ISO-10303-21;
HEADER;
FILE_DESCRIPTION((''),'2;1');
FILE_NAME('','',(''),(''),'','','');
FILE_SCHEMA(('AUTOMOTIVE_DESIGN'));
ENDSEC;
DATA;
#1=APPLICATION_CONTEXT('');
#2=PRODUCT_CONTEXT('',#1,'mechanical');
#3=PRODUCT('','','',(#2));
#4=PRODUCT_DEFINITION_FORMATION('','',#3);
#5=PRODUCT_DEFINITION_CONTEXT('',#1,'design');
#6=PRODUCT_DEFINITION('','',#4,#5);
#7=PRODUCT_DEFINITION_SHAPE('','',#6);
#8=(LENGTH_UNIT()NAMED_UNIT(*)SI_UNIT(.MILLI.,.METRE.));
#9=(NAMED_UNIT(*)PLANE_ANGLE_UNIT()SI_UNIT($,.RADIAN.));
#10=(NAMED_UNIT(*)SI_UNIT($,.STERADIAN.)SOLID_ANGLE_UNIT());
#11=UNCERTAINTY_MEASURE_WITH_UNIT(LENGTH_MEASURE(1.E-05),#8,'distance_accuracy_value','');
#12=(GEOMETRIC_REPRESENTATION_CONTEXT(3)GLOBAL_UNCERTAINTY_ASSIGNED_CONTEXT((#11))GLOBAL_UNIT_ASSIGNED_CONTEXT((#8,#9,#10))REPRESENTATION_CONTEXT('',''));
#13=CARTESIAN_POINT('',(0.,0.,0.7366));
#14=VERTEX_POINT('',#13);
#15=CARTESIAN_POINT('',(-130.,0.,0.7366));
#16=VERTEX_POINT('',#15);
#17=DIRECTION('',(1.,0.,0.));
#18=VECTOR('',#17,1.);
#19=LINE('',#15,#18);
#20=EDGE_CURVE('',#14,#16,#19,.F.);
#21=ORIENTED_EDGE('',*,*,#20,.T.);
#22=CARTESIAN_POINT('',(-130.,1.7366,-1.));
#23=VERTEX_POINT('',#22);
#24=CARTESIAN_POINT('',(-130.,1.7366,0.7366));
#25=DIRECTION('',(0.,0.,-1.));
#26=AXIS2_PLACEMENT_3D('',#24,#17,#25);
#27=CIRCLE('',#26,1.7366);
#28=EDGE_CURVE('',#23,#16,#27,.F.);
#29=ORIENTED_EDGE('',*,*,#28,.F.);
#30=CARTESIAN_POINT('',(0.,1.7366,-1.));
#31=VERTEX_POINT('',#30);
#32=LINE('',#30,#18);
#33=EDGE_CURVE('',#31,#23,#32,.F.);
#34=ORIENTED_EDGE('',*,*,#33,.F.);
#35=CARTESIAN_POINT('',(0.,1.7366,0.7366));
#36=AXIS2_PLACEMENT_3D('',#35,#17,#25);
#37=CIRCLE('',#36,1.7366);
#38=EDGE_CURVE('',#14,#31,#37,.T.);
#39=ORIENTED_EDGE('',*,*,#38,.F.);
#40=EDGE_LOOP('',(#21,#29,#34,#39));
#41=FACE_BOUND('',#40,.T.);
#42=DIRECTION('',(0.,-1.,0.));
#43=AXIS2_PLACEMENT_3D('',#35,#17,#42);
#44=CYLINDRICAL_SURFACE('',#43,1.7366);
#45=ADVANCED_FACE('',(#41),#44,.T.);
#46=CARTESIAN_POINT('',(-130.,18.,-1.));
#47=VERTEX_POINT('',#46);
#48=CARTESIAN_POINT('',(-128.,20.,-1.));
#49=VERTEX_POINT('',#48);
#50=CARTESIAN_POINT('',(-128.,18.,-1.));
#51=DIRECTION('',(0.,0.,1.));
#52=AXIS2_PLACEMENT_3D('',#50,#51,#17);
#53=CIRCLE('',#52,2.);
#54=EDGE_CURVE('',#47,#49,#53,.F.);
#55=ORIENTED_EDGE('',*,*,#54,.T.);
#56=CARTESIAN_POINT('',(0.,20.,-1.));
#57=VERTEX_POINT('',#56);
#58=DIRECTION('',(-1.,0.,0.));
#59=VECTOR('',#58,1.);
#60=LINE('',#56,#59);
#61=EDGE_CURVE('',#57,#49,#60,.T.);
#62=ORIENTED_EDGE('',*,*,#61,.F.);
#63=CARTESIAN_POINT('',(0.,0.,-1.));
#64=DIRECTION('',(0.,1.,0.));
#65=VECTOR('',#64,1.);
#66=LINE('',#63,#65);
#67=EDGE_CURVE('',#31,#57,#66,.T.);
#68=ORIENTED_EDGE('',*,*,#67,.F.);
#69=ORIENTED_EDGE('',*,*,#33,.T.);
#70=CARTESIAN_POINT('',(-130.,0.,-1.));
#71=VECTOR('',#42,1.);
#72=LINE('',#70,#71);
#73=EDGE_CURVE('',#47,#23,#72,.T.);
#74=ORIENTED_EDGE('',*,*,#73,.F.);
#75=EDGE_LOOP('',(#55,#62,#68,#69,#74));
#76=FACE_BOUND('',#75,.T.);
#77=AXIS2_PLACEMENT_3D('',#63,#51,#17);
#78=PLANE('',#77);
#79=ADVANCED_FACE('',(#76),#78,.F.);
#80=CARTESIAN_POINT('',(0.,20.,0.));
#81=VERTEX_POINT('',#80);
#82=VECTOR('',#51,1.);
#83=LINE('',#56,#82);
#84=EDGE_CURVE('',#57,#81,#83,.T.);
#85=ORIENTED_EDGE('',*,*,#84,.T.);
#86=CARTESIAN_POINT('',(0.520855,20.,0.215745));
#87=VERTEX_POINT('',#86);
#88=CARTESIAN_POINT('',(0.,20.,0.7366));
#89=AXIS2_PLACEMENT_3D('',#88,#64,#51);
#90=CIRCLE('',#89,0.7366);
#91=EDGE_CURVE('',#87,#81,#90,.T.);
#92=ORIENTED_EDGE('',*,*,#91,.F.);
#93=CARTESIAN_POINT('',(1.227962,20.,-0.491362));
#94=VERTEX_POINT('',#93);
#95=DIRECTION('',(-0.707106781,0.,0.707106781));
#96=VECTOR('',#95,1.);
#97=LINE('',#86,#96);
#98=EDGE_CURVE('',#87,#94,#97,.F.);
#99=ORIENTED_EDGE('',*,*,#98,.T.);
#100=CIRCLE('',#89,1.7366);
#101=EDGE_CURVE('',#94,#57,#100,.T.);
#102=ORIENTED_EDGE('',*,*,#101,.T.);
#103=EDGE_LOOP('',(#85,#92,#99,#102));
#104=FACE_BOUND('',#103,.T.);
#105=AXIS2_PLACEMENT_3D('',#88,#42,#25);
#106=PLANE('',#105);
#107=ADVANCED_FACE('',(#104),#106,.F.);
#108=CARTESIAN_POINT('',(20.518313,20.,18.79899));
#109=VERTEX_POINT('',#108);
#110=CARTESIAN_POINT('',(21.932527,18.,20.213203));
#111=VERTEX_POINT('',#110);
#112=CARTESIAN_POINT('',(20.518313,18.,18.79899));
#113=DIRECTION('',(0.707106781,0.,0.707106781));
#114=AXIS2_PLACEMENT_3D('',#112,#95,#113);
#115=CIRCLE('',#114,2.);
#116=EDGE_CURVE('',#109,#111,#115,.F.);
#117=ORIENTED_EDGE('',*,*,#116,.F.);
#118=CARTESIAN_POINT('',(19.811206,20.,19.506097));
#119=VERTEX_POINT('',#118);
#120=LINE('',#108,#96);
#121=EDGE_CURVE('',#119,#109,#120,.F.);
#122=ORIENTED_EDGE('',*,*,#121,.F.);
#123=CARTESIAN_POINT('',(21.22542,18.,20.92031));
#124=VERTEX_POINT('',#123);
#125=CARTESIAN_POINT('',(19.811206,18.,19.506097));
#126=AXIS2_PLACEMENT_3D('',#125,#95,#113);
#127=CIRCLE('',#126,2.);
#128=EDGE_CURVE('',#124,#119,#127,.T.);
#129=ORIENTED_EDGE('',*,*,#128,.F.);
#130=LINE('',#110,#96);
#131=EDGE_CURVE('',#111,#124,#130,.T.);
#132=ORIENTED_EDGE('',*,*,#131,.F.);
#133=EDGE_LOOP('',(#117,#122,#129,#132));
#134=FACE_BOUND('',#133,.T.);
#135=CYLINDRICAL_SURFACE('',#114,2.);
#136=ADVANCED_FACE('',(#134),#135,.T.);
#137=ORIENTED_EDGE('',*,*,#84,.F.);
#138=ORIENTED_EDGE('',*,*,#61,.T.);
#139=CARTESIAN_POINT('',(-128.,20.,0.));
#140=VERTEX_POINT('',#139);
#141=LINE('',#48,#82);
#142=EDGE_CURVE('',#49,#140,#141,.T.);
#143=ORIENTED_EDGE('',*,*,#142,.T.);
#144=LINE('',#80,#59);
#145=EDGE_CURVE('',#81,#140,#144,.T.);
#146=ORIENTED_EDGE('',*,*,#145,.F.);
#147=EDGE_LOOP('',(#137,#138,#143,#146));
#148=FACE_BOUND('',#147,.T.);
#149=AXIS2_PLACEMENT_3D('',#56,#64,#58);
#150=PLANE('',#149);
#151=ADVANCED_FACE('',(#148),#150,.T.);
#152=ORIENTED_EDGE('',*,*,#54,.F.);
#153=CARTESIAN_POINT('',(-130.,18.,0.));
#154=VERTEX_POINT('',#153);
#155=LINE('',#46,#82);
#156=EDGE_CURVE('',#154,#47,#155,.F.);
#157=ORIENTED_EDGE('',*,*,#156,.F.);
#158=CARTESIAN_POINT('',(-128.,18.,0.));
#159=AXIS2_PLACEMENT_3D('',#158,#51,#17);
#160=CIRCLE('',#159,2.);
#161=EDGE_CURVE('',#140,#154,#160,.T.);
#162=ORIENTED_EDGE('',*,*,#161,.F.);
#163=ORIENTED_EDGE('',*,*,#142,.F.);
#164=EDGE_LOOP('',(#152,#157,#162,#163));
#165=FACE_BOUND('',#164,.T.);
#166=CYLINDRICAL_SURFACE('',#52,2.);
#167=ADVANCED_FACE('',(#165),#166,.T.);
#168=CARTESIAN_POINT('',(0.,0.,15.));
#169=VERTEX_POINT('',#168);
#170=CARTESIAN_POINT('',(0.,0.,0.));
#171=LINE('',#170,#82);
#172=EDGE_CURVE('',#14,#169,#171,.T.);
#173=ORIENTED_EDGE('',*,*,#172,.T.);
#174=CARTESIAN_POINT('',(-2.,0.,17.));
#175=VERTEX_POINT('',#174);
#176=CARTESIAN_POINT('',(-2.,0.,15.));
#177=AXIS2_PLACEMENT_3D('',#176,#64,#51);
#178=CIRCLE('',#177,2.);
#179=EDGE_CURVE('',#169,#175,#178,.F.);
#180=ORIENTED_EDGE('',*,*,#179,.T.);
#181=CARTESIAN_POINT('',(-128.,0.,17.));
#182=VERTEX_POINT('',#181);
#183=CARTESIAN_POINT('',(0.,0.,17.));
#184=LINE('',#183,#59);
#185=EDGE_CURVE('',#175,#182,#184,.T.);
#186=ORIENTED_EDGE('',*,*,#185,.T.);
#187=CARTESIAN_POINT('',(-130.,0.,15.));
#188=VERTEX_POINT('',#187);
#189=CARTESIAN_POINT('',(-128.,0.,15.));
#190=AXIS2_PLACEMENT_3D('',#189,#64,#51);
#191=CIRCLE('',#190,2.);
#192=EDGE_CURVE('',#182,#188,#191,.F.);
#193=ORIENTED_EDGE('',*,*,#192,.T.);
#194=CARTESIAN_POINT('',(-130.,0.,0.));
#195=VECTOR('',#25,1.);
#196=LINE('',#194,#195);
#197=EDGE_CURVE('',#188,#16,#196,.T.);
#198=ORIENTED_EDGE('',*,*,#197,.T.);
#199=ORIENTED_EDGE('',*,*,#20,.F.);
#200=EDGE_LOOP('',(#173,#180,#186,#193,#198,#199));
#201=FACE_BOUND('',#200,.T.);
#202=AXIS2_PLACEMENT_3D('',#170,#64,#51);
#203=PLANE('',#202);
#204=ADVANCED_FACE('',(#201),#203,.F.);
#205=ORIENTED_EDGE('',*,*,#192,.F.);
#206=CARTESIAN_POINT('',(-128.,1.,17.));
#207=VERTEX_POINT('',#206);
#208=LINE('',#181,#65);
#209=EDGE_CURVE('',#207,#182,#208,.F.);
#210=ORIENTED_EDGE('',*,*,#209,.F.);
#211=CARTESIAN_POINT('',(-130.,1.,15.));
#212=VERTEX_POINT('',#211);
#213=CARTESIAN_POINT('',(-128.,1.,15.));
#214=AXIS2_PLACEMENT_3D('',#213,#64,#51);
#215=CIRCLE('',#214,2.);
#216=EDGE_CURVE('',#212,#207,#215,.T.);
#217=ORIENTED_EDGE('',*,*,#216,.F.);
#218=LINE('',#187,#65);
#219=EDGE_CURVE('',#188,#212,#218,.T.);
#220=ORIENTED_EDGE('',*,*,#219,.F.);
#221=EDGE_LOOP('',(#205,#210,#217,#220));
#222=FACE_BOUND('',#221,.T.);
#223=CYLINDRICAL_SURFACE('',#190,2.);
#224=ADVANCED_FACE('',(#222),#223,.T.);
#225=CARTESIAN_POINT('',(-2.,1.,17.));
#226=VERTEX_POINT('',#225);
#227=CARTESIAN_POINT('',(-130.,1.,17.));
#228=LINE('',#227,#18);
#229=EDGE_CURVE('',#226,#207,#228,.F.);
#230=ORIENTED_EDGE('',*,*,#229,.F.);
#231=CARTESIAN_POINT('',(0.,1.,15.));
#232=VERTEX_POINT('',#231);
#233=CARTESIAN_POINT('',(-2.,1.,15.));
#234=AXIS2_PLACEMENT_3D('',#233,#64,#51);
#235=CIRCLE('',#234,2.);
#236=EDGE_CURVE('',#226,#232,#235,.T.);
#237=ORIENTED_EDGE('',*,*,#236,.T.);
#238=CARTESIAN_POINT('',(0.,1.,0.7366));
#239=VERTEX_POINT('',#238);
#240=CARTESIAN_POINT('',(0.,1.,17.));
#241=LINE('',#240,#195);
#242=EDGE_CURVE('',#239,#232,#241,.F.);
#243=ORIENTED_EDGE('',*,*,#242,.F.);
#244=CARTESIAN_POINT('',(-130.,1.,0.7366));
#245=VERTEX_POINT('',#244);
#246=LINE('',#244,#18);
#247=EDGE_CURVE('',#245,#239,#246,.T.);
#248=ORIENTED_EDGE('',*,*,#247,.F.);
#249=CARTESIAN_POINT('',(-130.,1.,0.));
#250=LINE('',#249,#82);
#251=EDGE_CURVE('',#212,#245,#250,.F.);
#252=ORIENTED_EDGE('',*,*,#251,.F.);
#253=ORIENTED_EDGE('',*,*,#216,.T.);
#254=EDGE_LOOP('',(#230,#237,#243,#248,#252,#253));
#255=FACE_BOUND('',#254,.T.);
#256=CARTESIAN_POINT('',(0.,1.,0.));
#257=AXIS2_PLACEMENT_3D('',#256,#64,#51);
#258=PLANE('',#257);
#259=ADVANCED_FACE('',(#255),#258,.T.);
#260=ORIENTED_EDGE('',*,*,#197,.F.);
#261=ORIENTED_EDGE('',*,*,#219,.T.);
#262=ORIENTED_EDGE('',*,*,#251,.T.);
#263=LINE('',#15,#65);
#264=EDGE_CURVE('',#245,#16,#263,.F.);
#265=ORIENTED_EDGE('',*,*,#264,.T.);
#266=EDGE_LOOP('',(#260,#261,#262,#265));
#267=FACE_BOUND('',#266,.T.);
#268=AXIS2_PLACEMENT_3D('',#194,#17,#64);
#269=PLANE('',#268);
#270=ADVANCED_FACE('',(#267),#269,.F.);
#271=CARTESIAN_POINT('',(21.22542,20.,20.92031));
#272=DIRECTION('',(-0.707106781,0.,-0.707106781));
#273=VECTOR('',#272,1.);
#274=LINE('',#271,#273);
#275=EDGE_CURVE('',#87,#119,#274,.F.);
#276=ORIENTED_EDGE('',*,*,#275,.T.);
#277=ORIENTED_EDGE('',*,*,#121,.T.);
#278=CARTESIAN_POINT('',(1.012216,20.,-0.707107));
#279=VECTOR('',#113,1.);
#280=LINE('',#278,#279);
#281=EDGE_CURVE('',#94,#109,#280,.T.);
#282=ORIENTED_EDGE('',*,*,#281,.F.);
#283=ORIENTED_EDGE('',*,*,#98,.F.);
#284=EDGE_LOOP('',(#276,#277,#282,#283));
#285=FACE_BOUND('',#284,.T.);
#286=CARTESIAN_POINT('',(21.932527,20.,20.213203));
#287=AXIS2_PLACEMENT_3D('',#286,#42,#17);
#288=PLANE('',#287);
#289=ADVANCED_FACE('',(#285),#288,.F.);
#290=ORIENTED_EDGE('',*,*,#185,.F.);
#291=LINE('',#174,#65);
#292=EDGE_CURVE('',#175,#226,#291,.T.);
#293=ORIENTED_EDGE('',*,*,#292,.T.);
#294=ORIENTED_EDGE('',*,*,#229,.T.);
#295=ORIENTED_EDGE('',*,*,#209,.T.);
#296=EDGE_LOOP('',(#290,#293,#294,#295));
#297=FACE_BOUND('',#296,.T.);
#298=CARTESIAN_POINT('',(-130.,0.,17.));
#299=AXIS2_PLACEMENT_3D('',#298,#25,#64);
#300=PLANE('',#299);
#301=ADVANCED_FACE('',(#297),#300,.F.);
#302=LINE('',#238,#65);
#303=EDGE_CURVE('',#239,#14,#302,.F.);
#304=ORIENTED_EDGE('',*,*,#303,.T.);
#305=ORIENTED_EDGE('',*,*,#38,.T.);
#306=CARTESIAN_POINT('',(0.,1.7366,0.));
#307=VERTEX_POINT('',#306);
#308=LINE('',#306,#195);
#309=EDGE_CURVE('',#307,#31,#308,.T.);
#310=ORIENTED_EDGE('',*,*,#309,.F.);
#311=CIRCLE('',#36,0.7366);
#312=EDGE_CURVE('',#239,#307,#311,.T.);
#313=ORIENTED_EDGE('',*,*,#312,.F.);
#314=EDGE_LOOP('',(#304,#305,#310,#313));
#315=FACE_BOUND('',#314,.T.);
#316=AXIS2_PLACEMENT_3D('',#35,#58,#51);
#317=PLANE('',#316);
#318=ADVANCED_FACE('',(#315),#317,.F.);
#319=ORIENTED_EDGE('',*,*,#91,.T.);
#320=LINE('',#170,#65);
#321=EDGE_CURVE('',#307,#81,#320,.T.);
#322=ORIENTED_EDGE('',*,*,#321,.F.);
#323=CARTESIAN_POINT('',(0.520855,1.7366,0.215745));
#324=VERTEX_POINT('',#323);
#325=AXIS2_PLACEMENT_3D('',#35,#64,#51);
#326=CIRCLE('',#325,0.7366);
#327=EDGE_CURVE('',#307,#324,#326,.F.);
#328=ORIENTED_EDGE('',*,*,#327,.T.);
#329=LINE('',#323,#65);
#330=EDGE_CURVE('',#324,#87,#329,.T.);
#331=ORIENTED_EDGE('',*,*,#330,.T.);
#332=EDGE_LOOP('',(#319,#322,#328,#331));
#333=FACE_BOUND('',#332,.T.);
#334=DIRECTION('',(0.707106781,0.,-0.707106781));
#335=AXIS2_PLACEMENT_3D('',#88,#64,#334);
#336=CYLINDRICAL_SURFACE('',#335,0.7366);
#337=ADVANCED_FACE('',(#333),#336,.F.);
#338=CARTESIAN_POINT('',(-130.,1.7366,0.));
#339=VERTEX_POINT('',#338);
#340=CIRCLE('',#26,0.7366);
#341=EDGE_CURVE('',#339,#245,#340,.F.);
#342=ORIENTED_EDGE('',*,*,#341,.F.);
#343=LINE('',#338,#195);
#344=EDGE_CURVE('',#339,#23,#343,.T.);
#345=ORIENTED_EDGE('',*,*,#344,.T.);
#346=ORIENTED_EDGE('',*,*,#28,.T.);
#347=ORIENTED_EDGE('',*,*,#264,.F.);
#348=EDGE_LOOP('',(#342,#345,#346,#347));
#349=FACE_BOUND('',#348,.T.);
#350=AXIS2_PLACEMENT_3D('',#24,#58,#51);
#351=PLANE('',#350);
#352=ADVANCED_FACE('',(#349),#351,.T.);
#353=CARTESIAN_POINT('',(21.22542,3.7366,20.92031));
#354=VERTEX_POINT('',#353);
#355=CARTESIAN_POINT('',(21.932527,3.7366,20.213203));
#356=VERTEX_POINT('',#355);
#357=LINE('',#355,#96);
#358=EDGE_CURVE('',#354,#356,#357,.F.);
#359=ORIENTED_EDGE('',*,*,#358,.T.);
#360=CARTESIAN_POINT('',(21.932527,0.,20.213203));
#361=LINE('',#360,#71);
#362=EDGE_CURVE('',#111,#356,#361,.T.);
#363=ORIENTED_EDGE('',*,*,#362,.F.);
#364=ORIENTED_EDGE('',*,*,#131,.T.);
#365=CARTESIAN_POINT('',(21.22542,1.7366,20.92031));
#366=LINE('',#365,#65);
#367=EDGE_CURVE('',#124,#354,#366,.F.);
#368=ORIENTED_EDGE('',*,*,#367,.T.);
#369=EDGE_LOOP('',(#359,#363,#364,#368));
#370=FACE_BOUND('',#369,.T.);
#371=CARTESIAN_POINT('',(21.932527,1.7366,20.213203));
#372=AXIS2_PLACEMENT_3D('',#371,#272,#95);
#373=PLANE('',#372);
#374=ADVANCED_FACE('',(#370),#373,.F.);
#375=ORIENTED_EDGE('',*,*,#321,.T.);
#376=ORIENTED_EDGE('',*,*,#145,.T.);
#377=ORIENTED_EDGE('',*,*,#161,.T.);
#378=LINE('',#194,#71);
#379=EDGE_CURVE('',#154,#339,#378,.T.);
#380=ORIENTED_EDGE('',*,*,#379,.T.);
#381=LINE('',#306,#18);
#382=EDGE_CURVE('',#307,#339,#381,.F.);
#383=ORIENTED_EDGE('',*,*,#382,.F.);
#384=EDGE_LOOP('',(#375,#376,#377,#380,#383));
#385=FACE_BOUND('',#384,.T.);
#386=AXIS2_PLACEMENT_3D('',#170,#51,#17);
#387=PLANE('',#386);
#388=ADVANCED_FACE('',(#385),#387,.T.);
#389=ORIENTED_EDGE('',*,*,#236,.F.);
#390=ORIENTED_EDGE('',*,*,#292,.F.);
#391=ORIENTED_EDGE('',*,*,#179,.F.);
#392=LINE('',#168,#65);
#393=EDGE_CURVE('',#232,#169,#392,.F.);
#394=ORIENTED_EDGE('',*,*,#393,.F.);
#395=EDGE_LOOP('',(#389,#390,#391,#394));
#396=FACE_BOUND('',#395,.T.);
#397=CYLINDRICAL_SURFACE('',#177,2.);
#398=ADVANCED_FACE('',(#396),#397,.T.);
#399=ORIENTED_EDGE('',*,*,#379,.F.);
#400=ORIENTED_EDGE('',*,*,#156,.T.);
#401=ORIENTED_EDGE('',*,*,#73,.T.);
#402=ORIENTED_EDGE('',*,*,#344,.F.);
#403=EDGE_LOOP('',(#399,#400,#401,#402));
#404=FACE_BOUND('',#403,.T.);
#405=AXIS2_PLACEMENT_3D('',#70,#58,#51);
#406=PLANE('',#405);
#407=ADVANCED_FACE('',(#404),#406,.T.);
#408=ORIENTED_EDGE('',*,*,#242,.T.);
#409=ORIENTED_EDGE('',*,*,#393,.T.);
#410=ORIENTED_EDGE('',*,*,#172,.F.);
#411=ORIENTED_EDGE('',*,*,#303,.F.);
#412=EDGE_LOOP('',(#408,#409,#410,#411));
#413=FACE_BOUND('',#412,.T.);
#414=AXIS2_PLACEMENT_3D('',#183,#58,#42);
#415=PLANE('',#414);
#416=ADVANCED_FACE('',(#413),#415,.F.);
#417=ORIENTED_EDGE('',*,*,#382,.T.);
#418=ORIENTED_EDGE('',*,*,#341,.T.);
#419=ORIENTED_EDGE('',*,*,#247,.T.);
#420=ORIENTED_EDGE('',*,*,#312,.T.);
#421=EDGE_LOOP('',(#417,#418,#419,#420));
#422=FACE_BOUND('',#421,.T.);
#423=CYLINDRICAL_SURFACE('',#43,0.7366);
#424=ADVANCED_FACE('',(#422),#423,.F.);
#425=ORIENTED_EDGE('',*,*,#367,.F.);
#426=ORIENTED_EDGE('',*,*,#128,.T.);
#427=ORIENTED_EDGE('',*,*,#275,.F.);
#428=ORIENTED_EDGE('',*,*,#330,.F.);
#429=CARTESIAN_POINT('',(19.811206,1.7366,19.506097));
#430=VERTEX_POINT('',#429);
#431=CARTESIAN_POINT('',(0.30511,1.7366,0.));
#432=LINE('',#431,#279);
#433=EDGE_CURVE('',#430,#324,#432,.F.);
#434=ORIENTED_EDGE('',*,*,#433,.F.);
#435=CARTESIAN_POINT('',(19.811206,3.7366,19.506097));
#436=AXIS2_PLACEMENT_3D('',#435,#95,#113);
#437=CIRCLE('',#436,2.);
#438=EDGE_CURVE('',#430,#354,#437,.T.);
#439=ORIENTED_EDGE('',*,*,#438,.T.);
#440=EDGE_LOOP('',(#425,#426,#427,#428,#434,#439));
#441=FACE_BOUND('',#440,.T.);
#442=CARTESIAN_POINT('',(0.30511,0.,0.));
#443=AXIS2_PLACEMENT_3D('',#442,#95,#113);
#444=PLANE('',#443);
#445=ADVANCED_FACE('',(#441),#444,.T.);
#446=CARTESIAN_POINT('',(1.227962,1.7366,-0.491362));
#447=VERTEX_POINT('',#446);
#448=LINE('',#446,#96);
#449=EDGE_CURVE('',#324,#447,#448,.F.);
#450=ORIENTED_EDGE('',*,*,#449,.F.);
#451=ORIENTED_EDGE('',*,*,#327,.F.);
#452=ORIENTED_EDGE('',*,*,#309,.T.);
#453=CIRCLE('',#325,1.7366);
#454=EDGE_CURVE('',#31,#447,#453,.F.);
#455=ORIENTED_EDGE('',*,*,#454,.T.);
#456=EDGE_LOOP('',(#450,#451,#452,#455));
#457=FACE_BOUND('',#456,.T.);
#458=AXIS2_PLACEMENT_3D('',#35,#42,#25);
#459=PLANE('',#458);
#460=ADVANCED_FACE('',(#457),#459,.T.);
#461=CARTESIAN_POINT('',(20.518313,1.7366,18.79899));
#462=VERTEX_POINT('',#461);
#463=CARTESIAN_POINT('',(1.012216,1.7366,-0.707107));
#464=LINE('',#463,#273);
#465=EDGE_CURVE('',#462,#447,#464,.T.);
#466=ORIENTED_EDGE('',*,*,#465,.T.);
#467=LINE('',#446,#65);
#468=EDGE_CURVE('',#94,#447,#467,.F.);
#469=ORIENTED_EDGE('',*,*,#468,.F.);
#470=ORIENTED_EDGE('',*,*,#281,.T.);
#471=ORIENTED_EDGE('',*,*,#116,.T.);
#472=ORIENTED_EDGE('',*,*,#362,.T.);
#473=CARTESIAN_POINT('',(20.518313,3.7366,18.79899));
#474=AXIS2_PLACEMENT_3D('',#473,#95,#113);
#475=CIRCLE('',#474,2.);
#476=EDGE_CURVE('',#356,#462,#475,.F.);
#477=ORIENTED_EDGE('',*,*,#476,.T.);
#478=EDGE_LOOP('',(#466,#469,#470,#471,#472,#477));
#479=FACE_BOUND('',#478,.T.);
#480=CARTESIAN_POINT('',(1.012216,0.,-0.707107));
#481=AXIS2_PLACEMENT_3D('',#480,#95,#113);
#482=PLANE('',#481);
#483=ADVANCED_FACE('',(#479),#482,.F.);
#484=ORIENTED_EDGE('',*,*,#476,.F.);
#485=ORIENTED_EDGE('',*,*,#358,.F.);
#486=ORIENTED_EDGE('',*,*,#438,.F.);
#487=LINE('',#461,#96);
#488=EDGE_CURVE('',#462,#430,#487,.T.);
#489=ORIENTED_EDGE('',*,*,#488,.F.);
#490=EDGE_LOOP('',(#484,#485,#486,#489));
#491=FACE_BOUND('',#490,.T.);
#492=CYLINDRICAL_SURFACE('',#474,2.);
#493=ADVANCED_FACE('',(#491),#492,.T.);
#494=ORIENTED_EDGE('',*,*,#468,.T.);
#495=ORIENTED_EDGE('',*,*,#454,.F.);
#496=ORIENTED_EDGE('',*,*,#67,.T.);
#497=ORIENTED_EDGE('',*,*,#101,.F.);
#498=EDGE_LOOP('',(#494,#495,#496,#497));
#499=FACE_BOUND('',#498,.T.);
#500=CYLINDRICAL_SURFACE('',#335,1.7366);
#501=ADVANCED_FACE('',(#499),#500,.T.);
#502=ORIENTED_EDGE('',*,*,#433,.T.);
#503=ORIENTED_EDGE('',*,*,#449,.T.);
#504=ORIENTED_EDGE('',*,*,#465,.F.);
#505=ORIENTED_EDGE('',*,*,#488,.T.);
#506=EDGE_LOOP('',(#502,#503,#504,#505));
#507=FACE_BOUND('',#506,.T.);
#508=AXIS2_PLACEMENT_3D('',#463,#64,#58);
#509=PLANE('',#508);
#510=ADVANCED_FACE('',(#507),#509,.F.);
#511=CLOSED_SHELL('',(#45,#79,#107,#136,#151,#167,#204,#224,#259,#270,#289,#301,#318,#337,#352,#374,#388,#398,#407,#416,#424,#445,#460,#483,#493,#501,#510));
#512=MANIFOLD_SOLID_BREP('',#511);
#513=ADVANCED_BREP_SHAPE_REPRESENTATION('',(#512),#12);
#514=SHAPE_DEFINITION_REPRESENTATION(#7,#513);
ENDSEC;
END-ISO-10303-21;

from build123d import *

# Parameters (mm, degrees)
SKETCH2_W                    = 130
SKETCH2_H                    = 20
BASE_FLANGE1_DEPTH           = 1
EDGE_FLANGE1_STRIP_W         = 5.4732
EDGE_FLANGE1_STRIP_H         = 1
EDGE_FLANGE1_STRIP_CUT_DEPTH = 130
EDGE_FLANGE1_DEPTH           = 130
EDGE_FLANGE2_DEPTH           = 18.2634
FILLET1_R                    = 2


# Sheet-metal steps are written as plain solids
with BuildPart() as part:
    # Sketch2 → Base-Flange1 (new body)
    with BuildSketch(Plane.XY):
        with Locations((-65, 10)):
            Rectangle(SKETCH2_W, SKETCH2_H)
    extrude(amount=-BASE_FLANGE1_DEPTH)

    # Edge-Flange1 strip (across the edge) → Edge-Flange1 strip cut (cut)
    with BuildSketch(Plane.YZ.offset(-130)):
        with Locations((-1, -0.5)):
            Rectangle(EDGE_FLANGE1_STRIP_W, EDGE_FLANGE1_STRIP_H)
    extrude(amount=EDGE_FLANGE1_STRIP_CUT_DEPTH, mode=Mode.SUBTRACT)

    # Edge-Flange1 section (across the edge) → Edge-Flange1 (add)
    with BuildSketch(Plane.YZ.offset(-130)):
        with BuildLine():
            Line((0, 0.7366), (0, 17))
            Line((0, 17), (1, 17))
            Line((1, 17), (1, 0.7366))
            ThreePointArc((1, 0.7366), (1.215745145, 0.215745145), (1.7366, 0))
            Line((1.7366, 0), (1.7366, -1))
            ThreePointArc((1.7366, -1), (0.508638364, -0.491361636), (0, 0.7366))
        make_face()
    extrude(amount=EDGE_FLANGE1_DEPTH)

    # Edge-Flange2 section (across the edge) → Edge-Flange2 (add)
    with BuildSketch(Plane(origin=(0.30510971, 1.7366, 0), x_dir=(-0.7071067811865438, 0, 0.7071067811865512), z_dir=(0, 1, 0))):
        with BuildLine():
            Line((-1, 0.30510971), (-1, 29.585786438))
            Line((-1, 29.585786438), (0, 29.585786438))
            Line((0, 29.585786438), (0, 0.30510971))
            ThreePointArc((0, 0.30510971), (0.056070336, 0.023225094), (0.215745145, -0.215745145))
            Line((0.215745145, -0.215745145), (-0.491361636, -0.922851926))
            ThreePointArc((-0.491361636, -0.922851926), (-0.867809196, -0.359458339), (-1, 0.30510971))
        make_face()
    extrude(amount=EDGE_FLANGE2_DEPTH)

    # Fillet1
    fillet1_edges = [part.edges().sort_by_distance(p)[0] for p in [
        (-130, 0.5, 17),
        (0, 0.5, 17),
        (21.578973317, 1.7366, 20.566756826),
        (21.578973317, 20, 20.566756826),
        (-130, 20, -0.5),
    ]]
    fillet(fillet1_edges, radius=FILLET1_R)


solid = part.part
